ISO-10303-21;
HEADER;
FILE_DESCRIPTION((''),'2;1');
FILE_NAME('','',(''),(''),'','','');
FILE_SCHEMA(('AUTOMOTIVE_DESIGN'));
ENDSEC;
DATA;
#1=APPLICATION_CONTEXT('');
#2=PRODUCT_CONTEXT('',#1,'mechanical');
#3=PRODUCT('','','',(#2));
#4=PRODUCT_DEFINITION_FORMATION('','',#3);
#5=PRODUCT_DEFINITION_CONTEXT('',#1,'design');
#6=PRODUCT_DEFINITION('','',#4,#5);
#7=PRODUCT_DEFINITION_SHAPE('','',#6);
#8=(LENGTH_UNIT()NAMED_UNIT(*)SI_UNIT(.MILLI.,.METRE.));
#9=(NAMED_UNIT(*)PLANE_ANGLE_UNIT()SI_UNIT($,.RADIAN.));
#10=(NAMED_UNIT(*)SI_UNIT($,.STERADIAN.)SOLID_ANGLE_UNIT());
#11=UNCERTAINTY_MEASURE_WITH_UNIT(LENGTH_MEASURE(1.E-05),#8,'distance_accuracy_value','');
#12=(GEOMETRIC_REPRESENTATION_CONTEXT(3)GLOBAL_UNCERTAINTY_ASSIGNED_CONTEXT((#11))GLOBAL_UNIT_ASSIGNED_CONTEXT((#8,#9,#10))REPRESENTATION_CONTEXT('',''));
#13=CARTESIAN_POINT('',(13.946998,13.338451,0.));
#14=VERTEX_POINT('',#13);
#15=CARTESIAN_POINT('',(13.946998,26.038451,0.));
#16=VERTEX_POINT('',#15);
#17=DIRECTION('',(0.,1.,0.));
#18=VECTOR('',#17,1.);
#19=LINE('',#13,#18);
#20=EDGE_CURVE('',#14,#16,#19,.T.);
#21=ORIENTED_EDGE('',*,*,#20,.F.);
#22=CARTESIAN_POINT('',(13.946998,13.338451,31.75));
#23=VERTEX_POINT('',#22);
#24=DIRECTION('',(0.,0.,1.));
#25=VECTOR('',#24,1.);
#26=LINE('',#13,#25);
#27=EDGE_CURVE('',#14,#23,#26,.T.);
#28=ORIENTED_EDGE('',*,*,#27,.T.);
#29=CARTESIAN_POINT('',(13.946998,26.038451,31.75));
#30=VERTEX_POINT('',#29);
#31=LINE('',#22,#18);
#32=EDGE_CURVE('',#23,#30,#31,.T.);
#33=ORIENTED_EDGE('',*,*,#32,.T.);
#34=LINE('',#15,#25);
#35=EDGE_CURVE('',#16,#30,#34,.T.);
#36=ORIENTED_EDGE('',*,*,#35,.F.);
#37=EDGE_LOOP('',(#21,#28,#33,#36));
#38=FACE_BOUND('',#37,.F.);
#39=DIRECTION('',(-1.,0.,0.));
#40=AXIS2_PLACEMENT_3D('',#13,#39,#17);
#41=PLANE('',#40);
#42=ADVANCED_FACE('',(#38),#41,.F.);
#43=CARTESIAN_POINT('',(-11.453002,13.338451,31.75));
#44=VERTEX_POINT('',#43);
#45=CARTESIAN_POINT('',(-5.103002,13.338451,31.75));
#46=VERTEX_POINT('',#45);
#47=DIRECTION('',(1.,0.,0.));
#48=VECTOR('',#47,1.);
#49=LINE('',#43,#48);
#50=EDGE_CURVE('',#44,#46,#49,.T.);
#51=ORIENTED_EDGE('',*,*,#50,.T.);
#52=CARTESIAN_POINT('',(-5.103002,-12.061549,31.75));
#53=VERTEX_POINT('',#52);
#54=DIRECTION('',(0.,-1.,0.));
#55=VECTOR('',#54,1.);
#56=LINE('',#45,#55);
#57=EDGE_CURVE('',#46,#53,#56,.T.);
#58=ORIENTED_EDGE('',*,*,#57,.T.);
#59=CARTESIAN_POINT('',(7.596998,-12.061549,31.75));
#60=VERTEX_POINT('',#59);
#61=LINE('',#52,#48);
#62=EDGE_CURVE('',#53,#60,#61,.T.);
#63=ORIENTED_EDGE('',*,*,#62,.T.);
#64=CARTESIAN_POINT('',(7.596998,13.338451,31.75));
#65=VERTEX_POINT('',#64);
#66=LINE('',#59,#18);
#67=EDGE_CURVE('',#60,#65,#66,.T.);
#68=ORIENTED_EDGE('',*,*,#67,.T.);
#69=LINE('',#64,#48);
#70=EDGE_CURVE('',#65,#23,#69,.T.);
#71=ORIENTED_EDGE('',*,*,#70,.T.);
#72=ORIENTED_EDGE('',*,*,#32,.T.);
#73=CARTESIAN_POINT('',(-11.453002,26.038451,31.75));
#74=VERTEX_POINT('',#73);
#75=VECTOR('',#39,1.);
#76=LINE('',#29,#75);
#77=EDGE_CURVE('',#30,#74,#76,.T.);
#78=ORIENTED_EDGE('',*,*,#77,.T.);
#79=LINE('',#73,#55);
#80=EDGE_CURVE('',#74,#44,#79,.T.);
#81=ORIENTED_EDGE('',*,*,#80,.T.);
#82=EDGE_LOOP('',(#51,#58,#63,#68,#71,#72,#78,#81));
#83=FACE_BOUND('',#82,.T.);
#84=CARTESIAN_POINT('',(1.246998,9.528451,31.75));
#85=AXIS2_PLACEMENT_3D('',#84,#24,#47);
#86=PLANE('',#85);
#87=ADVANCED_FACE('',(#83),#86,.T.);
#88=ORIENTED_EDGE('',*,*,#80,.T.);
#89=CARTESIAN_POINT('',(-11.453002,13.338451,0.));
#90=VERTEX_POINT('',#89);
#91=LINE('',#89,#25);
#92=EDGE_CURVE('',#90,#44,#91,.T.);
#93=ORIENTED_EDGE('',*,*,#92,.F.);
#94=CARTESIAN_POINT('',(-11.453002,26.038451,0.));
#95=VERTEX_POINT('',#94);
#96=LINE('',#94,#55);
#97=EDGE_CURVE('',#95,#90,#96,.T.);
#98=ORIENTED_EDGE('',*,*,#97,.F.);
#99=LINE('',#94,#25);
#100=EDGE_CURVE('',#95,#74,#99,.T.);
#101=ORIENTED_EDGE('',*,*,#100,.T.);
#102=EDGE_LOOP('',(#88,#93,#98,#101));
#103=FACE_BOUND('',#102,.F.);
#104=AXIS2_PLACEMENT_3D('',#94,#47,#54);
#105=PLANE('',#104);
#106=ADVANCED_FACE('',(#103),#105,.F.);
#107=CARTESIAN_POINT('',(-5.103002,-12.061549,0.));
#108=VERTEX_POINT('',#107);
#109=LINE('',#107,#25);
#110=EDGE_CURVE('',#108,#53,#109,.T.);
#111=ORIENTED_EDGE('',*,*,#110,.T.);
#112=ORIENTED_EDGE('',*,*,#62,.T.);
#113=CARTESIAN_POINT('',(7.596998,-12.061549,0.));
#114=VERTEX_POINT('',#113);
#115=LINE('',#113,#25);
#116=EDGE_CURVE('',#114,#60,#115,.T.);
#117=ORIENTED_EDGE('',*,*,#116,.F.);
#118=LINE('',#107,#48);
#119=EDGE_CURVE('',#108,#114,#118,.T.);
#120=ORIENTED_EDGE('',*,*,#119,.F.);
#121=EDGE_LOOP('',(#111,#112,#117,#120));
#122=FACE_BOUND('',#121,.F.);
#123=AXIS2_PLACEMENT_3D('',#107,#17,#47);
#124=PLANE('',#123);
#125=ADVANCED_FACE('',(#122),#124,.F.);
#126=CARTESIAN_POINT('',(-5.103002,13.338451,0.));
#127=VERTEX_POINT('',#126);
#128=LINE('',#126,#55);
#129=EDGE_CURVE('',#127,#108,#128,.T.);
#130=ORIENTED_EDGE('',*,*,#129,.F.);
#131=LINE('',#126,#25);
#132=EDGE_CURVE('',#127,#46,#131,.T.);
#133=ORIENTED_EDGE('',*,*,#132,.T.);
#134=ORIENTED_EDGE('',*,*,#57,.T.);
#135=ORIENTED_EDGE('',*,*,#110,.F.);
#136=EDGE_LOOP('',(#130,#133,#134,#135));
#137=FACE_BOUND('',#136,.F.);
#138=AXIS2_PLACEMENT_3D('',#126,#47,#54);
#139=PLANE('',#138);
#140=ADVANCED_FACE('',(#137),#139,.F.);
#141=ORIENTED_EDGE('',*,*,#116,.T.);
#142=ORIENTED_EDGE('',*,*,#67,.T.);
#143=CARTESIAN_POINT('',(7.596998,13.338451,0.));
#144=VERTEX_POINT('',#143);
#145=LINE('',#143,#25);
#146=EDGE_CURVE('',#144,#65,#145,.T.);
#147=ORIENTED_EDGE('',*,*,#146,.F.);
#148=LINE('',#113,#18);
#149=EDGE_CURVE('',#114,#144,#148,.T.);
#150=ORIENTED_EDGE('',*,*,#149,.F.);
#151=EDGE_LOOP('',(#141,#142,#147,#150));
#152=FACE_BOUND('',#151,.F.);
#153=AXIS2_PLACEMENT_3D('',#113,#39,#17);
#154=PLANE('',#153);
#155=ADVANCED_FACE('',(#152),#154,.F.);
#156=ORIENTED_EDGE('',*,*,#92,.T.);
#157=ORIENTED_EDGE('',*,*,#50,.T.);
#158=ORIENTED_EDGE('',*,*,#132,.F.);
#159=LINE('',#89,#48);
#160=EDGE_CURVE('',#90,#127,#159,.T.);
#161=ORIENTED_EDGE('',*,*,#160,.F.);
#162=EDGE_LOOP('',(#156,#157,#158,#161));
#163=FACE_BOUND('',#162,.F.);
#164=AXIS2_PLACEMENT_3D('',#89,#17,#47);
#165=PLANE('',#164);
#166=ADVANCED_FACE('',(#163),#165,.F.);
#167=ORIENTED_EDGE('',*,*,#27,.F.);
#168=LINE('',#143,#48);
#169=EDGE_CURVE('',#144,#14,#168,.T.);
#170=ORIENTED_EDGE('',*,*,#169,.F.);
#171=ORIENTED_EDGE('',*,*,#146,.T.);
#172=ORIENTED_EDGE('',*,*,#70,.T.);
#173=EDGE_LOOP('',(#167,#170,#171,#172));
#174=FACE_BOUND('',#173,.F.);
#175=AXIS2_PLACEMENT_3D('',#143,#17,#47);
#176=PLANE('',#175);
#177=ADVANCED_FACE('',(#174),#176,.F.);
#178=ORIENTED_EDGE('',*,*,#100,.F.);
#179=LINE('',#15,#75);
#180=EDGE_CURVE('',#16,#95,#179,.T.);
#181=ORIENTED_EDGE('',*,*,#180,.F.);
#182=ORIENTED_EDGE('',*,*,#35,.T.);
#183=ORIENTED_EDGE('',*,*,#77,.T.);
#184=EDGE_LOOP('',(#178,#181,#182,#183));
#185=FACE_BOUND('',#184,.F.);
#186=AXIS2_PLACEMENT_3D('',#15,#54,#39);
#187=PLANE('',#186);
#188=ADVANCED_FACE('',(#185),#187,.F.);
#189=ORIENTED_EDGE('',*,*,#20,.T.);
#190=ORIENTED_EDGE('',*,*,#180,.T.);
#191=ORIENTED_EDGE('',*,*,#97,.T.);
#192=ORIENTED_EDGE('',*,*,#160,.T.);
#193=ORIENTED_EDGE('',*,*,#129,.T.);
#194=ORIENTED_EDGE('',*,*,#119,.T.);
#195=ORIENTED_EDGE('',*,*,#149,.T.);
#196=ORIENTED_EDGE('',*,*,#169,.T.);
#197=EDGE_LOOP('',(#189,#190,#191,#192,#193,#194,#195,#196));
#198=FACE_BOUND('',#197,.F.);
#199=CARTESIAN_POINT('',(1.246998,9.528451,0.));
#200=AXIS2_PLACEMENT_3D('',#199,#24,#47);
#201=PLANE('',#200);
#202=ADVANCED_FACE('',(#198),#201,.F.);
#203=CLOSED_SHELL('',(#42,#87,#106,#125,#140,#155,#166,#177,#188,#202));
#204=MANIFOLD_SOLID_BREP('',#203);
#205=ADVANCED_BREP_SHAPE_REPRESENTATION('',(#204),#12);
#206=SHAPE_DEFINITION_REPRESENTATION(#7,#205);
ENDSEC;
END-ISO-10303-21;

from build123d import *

# Parameters (mm, degrees)
F1_DEPTH = 31.75


# Not quite as in the source:
# - a length typed as a fraction of an inch, garbled in the dataset ("3 / 203.2 mm" for 3/8 in), is restored


with BuildPart() as f1:
    # F0 (on Top) → F1 (new body)
    with BuildSketch(Plane.XY):
        Polygon((13.946997959, 26.0384509316), (-11.453002041, 26.0384509316), (-11.453002041, 13.3384509316), (-5.103002041, 13.3384509316), (-5.103002041, -12.0615490684), (7.596997959, -12.0615490684), (7.596997959, 13.3384509316), (13.946997959, 13.3384509316), align=None)
    extrude(amount=F1_DEPTH)


solid = f1.part
